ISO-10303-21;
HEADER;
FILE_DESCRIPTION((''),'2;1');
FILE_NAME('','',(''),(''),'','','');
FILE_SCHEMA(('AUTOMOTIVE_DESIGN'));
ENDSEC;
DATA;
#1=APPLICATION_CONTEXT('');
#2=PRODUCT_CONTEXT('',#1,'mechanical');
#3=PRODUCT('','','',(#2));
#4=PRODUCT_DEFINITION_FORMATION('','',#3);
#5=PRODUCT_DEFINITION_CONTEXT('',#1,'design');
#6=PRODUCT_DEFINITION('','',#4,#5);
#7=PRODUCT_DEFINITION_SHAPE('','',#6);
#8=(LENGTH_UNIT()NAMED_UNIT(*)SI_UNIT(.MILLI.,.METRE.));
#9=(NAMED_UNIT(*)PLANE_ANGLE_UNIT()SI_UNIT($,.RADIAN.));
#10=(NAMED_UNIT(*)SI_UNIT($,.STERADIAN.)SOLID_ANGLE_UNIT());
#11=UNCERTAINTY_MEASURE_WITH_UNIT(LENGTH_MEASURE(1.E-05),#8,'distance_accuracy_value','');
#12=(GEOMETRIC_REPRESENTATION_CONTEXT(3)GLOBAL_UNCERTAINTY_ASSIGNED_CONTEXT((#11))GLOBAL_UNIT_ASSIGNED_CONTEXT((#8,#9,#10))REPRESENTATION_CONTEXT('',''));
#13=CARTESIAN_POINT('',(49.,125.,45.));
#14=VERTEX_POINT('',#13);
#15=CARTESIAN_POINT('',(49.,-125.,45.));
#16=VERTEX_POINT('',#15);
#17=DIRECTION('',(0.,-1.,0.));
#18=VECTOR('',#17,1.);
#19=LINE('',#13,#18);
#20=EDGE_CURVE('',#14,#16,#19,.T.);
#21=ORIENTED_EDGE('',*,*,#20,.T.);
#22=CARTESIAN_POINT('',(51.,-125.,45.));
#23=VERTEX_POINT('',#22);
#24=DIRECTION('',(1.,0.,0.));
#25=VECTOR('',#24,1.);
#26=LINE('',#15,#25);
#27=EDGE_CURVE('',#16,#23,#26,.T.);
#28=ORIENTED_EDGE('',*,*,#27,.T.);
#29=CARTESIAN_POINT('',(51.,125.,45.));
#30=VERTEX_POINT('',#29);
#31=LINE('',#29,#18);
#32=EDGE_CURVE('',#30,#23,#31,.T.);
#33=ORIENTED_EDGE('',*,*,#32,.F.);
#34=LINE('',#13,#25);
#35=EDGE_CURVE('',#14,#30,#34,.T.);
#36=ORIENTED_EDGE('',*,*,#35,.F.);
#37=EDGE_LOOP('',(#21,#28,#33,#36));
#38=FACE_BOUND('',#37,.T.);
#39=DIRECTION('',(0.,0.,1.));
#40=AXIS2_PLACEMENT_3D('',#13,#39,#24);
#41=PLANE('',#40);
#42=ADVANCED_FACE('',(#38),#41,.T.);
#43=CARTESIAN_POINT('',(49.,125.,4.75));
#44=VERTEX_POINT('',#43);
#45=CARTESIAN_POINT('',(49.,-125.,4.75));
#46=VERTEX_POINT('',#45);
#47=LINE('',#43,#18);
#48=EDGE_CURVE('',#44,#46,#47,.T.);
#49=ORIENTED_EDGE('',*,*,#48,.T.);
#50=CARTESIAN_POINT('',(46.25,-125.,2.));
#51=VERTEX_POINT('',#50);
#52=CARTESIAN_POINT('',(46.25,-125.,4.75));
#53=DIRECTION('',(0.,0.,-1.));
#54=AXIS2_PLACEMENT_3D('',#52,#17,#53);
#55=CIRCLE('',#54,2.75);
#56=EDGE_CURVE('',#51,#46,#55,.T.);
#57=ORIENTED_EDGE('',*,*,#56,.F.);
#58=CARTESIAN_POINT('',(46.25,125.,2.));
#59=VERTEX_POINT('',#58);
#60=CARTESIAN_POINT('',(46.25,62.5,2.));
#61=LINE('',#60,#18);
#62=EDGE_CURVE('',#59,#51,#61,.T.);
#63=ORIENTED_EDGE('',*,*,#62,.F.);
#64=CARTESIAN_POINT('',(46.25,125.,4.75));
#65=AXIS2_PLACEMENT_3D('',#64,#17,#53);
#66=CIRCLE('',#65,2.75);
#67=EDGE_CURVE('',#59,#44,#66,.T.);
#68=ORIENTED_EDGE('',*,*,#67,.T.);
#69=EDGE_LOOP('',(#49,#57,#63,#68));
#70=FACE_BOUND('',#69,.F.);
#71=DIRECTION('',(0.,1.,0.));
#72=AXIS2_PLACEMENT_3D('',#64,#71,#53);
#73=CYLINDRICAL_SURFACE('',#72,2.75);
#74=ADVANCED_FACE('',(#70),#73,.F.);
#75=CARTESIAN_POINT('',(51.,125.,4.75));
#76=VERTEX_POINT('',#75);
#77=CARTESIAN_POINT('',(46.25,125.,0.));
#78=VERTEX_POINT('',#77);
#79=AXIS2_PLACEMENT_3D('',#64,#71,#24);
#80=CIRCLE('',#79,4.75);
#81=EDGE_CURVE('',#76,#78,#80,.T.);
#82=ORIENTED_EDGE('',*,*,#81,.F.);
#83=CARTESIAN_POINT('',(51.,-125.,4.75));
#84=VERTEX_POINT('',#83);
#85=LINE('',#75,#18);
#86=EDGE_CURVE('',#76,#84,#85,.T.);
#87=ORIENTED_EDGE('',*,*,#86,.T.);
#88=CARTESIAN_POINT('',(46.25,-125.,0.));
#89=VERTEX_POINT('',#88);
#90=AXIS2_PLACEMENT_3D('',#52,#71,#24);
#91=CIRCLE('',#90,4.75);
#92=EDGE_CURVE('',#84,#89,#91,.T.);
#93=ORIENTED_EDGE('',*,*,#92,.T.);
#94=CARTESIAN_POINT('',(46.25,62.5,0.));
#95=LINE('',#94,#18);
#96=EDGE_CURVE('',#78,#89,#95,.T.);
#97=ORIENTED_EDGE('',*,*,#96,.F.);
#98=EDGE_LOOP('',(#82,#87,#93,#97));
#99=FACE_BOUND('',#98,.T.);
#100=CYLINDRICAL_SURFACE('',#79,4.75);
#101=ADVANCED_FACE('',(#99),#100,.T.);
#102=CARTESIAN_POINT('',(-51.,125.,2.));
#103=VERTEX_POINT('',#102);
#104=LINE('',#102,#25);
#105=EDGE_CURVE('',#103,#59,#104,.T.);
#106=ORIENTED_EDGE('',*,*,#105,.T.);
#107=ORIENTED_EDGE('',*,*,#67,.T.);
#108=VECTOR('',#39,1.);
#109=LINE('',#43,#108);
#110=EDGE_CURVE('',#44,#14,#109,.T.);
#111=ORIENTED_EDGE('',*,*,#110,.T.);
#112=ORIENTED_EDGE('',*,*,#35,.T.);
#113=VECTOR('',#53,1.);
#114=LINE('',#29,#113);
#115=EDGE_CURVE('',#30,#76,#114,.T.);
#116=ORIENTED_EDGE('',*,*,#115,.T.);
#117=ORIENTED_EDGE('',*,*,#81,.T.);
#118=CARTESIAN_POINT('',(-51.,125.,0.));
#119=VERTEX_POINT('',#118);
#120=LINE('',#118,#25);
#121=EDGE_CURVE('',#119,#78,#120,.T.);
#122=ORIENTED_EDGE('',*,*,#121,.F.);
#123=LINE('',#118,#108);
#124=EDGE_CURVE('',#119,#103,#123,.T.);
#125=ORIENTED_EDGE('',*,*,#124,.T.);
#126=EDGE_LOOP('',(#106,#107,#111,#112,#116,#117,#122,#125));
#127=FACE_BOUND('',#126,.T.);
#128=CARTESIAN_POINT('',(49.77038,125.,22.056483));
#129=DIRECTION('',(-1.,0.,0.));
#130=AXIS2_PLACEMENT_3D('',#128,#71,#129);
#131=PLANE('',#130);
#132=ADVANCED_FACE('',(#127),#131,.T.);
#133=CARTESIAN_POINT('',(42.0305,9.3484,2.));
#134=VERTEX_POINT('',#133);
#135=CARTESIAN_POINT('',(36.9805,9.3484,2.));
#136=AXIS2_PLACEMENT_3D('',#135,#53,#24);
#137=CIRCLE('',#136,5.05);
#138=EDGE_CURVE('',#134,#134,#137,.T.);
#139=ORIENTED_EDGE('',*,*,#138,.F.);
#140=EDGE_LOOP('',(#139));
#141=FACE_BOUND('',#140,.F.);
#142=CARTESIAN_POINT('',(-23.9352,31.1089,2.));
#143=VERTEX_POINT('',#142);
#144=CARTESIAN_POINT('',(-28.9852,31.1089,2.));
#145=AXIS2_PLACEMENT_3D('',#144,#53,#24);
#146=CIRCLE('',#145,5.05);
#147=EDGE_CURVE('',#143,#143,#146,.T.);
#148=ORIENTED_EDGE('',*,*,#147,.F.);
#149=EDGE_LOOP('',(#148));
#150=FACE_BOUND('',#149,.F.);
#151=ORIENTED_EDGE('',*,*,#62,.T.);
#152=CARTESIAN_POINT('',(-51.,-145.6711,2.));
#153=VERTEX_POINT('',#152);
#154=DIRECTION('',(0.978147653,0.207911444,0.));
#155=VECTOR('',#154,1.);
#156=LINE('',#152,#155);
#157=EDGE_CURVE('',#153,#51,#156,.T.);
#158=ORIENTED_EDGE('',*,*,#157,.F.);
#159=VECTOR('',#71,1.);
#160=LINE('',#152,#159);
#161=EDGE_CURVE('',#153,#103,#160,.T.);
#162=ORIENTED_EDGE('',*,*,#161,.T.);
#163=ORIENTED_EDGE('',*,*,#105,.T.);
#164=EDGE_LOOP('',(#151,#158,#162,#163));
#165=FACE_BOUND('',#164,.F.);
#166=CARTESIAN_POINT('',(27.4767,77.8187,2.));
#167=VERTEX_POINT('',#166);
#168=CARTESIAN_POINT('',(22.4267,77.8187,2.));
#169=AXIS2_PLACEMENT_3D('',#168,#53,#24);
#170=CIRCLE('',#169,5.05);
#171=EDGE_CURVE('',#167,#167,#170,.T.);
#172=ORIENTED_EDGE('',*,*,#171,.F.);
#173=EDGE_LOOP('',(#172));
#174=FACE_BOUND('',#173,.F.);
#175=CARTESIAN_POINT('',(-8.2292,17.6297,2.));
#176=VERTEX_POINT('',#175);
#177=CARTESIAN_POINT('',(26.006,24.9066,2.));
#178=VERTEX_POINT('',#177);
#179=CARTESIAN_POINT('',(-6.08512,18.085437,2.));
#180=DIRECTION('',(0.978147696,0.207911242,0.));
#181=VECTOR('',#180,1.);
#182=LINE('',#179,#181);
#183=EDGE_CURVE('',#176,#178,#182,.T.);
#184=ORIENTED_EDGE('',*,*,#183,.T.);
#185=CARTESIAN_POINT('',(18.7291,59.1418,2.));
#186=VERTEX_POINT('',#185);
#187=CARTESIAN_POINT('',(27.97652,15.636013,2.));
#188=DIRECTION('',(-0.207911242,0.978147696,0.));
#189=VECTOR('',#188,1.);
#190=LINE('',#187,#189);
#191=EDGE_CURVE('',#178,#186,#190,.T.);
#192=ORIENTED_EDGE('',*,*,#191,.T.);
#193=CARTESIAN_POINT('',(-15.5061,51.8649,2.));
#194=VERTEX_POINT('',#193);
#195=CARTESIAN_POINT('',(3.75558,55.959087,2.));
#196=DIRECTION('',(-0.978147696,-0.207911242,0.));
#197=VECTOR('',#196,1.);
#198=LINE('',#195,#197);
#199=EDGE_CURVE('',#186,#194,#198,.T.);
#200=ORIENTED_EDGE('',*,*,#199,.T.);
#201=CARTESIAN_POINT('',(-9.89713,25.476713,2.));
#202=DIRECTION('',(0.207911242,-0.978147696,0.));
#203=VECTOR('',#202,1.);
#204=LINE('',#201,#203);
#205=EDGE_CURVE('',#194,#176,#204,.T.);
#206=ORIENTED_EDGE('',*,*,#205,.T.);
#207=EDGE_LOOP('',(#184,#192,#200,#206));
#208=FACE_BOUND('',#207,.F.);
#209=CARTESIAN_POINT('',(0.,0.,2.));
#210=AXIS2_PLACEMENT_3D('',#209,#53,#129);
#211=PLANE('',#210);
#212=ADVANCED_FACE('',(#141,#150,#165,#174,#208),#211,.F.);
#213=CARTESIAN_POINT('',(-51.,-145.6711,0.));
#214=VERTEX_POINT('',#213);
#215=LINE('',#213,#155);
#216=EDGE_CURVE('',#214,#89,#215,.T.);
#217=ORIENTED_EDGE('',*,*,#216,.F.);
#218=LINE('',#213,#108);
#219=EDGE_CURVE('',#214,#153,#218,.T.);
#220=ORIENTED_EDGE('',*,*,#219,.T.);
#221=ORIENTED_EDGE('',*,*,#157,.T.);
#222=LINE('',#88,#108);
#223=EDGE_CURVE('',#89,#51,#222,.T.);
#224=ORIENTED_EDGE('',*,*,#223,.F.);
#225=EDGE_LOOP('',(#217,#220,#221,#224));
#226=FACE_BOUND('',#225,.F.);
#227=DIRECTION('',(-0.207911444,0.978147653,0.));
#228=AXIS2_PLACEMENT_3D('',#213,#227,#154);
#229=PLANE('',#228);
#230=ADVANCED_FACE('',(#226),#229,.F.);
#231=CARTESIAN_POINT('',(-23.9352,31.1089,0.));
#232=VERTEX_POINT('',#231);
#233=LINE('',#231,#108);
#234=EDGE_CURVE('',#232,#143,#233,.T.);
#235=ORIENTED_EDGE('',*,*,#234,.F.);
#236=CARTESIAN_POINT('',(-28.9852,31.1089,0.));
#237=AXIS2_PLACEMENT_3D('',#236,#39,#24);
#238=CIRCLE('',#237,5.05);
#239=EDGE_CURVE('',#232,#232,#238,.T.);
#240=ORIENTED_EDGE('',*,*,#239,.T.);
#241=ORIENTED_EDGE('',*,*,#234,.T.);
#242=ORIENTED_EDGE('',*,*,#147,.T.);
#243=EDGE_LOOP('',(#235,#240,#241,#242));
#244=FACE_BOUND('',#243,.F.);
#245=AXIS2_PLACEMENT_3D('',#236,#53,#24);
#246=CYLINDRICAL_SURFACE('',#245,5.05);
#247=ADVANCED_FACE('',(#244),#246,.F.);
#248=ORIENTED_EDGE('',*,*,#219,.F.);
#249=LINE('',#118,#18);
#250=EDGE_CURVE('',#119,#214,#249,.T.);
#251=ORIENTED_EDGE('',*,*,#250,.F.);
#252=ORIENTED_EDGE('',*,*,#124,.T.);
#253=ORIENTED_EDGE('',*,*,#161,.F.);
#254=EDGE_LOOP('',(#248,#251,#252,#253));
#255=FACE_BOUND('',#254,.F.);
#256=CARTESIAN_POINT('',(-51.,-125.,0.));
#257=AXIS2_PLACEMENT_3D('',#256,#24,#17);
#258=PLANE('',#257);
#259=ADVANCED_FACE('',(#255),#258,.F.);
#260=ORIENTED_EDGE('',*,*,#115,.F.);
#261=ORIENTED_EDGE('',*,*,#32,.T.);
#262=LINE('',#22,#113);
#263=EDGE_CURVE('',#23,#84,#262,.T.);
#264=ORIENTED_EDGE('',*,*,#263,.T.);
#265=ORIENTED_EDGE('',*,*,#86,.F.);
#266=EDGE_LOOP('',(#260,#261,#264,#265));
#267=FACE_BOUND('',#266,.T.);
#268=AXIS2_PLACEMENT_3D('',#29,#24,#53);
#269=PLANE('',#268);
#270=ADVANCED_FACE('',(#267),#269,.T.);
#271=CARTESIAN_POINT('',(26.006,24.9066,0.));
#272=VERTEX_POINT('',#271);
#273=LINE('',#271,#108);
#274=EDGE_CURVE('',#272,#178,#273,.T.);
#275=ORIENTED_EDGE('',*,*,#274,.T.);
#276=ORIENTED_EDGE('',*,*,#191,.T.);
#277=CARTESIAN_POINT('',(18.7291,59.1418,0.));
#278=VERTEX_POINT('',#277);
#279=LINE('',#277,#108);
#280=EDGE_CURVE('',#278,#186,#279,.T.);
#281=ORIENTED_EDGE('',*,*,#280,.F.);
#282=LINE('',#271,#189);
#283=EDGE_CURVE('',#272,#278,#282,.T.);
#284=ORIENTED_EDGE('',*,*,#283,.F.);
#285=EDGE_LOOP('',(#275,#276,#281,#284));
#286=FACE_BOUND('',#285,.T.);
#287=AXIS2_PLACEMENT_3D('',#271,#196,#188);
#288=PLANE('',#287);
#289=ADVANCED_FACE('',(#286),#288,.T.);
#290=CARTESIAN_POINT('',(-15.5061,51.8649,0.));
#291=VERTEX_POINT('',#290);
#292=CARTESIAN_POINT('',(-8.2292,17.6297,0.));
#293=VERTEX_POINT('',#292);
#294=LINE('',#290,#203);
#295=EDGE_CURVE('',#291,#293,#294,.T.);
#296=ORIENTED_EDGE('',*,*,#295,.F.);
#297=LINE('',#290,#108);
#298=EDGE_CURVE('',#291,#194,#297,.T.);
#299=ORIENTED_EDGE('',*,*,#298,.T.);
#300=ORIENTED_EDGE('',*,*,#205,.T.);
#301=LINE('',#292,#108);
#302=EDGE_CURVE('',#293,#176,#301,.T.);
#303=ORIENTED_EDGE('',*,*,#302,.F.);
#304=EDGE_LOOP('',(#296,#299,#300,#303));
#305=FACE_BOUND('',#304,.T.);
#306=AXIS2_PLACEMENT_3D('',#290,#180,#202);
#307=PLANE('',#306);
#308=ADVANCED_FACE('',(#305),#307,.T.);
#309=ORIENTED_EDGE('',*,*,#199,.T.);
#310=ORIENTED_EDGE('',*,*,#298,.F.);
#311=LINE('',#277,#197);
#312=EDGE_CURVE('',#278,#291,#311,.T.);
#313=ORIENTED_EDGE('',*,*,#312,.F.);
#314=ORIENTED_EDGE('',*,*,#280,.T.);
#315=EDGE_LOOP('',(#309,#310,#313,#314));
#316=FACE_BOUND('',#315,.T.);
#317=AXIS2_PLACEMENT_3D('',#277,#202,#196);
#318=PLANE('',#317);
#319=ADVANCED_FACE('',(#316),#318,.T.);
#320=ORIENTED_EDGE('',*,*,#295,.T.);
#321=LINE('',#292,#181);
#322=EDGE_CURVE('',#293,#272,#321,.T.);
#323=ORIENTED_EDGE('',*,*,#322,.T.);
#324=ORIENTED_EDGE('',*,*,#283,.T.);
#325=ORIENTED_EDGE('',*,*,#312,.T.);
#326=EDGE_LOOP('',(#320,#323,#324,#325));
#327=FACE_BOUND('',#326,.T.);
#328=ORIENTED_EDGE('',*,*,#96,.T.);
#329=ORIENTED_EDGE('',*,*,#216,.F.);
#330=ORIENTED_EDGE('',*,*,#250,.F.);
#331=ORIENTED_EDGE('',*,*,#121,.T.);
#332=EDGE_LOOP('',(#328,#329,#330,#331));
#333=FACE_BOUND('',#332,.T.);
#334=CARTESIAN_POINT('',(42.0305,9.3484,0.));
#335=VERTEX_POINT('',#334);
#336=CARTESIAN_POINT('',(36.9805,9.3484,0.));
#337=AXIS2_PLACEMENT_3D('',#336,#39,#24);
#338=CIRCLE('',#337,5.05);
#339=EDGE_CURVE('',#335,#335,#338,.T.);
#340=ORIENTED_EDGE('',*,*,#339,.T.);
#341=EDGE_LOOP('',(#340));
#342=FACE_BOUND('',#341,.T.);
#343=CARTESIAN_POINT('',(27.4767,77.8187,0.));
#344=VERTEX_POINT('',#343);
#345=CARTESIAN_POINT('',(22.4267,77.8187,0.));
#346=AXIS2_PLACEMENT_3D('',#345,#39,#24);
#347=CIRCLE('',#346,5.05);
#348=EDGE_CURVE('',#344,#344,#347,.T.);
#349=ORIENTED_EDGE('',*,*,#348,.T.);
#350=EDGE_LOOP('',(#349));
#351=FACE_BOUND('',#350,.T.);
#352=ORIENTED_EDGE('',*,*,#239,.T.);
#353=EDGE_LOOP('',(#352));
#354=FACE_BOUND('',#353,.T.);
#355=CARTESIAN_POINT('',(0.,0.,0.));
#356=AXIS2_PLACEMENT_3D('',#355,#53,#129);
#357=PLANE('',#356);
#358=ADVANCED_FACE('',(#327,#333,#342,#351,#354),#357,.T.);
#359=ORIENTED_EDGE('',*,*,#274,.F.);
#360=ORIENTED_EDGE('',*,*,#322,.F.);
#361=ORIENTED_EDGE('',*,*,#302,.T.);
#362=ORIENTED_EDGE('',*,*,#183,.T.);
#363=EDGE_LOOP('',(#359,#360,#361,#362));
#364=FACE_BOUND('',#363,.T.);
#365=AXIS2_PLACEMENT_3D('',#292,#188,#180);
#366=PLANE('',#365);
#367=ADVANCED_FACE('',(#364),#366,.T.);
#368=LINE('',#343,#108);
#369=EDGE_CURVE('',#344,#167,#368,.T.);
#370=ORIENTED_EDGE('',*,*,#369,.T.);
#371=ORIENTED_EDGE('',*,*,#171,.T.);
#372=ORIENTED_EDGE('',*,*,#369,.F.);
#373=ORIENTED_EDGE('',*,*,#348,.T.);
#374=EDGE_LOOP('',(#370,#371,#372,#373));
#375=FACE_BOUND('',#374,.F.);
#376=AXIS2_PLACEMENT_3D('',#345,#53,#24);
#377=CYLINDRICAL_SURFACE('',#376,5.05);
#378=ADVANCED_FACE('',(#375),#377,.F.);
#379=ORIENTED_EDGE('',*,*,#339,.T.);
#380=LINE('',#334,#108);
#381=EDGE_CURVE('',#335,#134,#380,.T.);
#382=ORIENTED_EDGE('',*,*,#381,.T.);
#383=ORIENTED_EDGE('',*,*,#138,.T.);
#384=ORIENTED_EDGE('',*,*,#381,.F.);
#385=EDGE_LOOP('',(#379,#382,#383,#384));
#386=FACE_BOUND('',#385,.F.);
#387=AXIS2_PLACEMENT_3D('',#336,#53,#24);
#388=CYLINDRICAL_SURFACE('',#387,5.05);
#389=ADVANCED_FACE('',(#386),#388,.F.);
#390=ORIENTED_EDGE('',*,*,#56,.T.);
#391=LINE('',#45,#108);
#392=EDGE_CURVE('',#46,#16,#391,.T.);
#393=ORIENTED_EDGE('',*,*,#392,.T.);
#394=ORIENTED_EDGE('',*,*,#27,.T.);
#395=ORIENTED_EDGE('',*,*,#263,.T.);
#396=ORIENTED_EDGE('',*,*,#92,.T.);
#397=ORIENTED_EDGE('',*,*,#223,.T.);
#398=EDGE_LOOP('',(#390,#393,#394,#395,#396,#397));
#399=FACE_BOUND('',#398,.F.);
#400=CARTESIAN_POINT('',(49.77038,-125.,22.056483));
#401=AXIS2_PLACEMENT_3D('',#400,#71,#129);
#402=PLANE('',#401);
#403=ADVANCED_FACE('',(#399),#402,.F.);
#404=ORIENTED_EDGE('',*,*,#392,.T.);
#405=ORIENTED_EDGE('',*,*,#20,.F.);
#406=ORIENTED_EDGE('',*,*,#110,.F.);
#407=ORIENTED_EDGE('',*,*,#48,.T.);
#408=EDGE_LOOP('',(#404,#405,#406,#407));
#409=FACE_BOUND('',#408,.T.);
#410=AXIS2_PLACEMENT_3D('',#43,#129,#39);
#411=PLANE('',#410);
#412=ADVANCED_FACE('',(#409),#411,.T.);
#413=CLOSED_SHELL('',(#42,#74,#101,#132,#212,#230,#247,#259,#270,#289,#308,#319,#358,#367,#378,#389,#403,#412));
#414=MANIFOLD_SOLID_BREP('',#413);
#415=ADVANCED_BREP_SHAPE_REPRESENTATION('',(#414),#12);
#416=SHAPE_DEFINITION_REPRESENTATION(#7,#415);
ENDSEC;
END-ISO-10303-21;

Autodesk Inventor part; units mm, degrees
ref_plane "YZ Plane" through (0, 0, 0) normal (1, 0, 0) x (0, 1, 0)
ref_plane "XZ Plane" through (0, 0, 0) normal (0, 1, 0) x (-1, 0, 0)
ref_plane "XY Plane" through (0, 0, 0) normal (0, 0, 1) x (1, 0, 0)
sketch "Sketch1" plane through (0, 0, 0) normal (0, 0, 1) x (1, 0, 0)
  line L0 (-51, 125) -> (51, 125)
  line L1 (51, 125) -> (51, -125)
  line L2 (51, -125) -> (-51, -125)
  line L3 (-51, -125) -> (-51, 125)
  line L4 (-51, 125) -> (51, -125) construction
  point P0 (0, 0)
  point P1 (0, 0)
  dimension "d0" = 102
  dimension "d1" = 250
extrude "Plate1" add sketch "Sketch1" along normal blind 2
sketch "Sketch4" plane through (49, 125, 0) normal (1, 0, 0) x (0, 1, 0)
  line L0 (-250, 0) -> (0, 0)
  line L1 (0, 0) -> (0, 45)
  line L2 (0, 45) -> (-250, 45)
  line L3 (-250, 45) -> (-250, 0)
edge flange "Flange1" height 45 angle 90 thickness 2 bend radius 2.75 thickness toward (1, 0, 0) relief round relief width 2 relief depth 1 edges at (51, 0, 2) wall of the first edge with corners at (49, -125, 0) (49, 125, 0) (49, 125, 45) (49, -125, 45)
bend "Bend1"
corner "Corner1"
sketch "Sketch5" plane through (0, 0, 0) normal (0, 0, -1) x (-1, 0, 0)
  line L0 (-46.25, 125) -> (-46.25, -125) projected
  line L1 (51, -125) -> (-46.25, -125) projected
  line L2 (51, 125) -> (51, -125) projected
  line L3 (-46.25, 125) -> (51, 125) projected
  line L4 (51, -125) -> (51, -145.6711)
  line L5 (-46.25, -125) -> (51, -125) projected
  line L6 (51, -145.6711) -> (-46.25, -125)
  point P0 (0, 0)
  dimension "d25" = 12
extrude "Extrusion2" add sketch "Sketch5" against normal up to surface (2 mm away) contours L1 L4 L6
sketch "Sketch7" plane through (0, 0, 0) normal (0, 0, 1) x (1, 0, 0)
  line L0 (46.25, -125) -> (-51, -145.6711) projected
  circle A0 centre (36.9805, 9.3484) radius 5.05
  line L1 (36.9805, 9.3484) -> (22.4267, 77.8187) construction
  line L2 (26.006, 24.9066) -> (18.7291, 59.1418)
  circle A1 centre (22.4267, 77.8187) radius 5.05
  line L3 (-28.9852, 31.1089) -> (36.9805, 9.3484) construction
  line L4 (26.006, 24.9066) -> (-15.5061, 51.8649) construction
  line L5 (18.7291, 59.1418) -> (-15.5061, 51.8649)
  line L6 (-8.2292, 17.6297) -> (26.006, 24.9066)
  line L7 (18.7291, 59.1418) -> (-8.2292, 17.6297) construction
  line L8 (-15.5061, 51.8649) -> (-8.2292, 17.6297)
  line L9 (22.3675, 42.0242) -> (-28.9852, 31.1089) construction
  line L10 (22.4267, 77.8187) -> (-28.9852, 31.1089) construction
  circle A2 centre (-28.9852, 31.1089) radius 5.05
  point P0 (0, 0)
  point P1 (-47.5274, -178.5141)
  point P2 (5.2499, 38.3858)
  point P3 (-51, -145.6711)
  dimension "d32" = 35
  dimension "d33" = 35
  dimension "d34" = 10.1
  dimension "d35" = 70
  dimension "d36" = 60
  dimension "d37" = 25
extrude "Extrusion3" cut sketch "Sketch7" along normal through all
equation "\"d33\" = d32"
equation "\"d2\" = Thickness"
equation "\"d15\" = BendReliefWidth"
equation "\"d16\" = BendReliefDepth"
equation "\"d17\" = MinimumRemnant"
equation "\"d18\" = TransitionRadius"
equation "\"d21\" = BendRadius"
equation "\"d22\" = CornerReliefSize"
equation "\"d23\" = GapSize"
equation "\"d24\" = JacobiRadiusSize"
equation "\"BendReliefWidth\" = Thickness"
equation "\"BendReliefDepth\" = 0.5 * Thickness"
equation "\"CornerReliefSize\" = 4 * Thickness"
equation "\"MinimumRemnant\" = 2 * Thickness"
equation "\"TransitionRadius\" = BendRadius"
equation "\"JacobiRadiusSize\" = BendRadius"
equation "\"GapSize\" = Thickness"
equation "\"Thickness\" = 2"
equation "\"BendRadius\" = 2.75"
properties part number "MNT-CDF-613 big way" material "Stainless Steel"
